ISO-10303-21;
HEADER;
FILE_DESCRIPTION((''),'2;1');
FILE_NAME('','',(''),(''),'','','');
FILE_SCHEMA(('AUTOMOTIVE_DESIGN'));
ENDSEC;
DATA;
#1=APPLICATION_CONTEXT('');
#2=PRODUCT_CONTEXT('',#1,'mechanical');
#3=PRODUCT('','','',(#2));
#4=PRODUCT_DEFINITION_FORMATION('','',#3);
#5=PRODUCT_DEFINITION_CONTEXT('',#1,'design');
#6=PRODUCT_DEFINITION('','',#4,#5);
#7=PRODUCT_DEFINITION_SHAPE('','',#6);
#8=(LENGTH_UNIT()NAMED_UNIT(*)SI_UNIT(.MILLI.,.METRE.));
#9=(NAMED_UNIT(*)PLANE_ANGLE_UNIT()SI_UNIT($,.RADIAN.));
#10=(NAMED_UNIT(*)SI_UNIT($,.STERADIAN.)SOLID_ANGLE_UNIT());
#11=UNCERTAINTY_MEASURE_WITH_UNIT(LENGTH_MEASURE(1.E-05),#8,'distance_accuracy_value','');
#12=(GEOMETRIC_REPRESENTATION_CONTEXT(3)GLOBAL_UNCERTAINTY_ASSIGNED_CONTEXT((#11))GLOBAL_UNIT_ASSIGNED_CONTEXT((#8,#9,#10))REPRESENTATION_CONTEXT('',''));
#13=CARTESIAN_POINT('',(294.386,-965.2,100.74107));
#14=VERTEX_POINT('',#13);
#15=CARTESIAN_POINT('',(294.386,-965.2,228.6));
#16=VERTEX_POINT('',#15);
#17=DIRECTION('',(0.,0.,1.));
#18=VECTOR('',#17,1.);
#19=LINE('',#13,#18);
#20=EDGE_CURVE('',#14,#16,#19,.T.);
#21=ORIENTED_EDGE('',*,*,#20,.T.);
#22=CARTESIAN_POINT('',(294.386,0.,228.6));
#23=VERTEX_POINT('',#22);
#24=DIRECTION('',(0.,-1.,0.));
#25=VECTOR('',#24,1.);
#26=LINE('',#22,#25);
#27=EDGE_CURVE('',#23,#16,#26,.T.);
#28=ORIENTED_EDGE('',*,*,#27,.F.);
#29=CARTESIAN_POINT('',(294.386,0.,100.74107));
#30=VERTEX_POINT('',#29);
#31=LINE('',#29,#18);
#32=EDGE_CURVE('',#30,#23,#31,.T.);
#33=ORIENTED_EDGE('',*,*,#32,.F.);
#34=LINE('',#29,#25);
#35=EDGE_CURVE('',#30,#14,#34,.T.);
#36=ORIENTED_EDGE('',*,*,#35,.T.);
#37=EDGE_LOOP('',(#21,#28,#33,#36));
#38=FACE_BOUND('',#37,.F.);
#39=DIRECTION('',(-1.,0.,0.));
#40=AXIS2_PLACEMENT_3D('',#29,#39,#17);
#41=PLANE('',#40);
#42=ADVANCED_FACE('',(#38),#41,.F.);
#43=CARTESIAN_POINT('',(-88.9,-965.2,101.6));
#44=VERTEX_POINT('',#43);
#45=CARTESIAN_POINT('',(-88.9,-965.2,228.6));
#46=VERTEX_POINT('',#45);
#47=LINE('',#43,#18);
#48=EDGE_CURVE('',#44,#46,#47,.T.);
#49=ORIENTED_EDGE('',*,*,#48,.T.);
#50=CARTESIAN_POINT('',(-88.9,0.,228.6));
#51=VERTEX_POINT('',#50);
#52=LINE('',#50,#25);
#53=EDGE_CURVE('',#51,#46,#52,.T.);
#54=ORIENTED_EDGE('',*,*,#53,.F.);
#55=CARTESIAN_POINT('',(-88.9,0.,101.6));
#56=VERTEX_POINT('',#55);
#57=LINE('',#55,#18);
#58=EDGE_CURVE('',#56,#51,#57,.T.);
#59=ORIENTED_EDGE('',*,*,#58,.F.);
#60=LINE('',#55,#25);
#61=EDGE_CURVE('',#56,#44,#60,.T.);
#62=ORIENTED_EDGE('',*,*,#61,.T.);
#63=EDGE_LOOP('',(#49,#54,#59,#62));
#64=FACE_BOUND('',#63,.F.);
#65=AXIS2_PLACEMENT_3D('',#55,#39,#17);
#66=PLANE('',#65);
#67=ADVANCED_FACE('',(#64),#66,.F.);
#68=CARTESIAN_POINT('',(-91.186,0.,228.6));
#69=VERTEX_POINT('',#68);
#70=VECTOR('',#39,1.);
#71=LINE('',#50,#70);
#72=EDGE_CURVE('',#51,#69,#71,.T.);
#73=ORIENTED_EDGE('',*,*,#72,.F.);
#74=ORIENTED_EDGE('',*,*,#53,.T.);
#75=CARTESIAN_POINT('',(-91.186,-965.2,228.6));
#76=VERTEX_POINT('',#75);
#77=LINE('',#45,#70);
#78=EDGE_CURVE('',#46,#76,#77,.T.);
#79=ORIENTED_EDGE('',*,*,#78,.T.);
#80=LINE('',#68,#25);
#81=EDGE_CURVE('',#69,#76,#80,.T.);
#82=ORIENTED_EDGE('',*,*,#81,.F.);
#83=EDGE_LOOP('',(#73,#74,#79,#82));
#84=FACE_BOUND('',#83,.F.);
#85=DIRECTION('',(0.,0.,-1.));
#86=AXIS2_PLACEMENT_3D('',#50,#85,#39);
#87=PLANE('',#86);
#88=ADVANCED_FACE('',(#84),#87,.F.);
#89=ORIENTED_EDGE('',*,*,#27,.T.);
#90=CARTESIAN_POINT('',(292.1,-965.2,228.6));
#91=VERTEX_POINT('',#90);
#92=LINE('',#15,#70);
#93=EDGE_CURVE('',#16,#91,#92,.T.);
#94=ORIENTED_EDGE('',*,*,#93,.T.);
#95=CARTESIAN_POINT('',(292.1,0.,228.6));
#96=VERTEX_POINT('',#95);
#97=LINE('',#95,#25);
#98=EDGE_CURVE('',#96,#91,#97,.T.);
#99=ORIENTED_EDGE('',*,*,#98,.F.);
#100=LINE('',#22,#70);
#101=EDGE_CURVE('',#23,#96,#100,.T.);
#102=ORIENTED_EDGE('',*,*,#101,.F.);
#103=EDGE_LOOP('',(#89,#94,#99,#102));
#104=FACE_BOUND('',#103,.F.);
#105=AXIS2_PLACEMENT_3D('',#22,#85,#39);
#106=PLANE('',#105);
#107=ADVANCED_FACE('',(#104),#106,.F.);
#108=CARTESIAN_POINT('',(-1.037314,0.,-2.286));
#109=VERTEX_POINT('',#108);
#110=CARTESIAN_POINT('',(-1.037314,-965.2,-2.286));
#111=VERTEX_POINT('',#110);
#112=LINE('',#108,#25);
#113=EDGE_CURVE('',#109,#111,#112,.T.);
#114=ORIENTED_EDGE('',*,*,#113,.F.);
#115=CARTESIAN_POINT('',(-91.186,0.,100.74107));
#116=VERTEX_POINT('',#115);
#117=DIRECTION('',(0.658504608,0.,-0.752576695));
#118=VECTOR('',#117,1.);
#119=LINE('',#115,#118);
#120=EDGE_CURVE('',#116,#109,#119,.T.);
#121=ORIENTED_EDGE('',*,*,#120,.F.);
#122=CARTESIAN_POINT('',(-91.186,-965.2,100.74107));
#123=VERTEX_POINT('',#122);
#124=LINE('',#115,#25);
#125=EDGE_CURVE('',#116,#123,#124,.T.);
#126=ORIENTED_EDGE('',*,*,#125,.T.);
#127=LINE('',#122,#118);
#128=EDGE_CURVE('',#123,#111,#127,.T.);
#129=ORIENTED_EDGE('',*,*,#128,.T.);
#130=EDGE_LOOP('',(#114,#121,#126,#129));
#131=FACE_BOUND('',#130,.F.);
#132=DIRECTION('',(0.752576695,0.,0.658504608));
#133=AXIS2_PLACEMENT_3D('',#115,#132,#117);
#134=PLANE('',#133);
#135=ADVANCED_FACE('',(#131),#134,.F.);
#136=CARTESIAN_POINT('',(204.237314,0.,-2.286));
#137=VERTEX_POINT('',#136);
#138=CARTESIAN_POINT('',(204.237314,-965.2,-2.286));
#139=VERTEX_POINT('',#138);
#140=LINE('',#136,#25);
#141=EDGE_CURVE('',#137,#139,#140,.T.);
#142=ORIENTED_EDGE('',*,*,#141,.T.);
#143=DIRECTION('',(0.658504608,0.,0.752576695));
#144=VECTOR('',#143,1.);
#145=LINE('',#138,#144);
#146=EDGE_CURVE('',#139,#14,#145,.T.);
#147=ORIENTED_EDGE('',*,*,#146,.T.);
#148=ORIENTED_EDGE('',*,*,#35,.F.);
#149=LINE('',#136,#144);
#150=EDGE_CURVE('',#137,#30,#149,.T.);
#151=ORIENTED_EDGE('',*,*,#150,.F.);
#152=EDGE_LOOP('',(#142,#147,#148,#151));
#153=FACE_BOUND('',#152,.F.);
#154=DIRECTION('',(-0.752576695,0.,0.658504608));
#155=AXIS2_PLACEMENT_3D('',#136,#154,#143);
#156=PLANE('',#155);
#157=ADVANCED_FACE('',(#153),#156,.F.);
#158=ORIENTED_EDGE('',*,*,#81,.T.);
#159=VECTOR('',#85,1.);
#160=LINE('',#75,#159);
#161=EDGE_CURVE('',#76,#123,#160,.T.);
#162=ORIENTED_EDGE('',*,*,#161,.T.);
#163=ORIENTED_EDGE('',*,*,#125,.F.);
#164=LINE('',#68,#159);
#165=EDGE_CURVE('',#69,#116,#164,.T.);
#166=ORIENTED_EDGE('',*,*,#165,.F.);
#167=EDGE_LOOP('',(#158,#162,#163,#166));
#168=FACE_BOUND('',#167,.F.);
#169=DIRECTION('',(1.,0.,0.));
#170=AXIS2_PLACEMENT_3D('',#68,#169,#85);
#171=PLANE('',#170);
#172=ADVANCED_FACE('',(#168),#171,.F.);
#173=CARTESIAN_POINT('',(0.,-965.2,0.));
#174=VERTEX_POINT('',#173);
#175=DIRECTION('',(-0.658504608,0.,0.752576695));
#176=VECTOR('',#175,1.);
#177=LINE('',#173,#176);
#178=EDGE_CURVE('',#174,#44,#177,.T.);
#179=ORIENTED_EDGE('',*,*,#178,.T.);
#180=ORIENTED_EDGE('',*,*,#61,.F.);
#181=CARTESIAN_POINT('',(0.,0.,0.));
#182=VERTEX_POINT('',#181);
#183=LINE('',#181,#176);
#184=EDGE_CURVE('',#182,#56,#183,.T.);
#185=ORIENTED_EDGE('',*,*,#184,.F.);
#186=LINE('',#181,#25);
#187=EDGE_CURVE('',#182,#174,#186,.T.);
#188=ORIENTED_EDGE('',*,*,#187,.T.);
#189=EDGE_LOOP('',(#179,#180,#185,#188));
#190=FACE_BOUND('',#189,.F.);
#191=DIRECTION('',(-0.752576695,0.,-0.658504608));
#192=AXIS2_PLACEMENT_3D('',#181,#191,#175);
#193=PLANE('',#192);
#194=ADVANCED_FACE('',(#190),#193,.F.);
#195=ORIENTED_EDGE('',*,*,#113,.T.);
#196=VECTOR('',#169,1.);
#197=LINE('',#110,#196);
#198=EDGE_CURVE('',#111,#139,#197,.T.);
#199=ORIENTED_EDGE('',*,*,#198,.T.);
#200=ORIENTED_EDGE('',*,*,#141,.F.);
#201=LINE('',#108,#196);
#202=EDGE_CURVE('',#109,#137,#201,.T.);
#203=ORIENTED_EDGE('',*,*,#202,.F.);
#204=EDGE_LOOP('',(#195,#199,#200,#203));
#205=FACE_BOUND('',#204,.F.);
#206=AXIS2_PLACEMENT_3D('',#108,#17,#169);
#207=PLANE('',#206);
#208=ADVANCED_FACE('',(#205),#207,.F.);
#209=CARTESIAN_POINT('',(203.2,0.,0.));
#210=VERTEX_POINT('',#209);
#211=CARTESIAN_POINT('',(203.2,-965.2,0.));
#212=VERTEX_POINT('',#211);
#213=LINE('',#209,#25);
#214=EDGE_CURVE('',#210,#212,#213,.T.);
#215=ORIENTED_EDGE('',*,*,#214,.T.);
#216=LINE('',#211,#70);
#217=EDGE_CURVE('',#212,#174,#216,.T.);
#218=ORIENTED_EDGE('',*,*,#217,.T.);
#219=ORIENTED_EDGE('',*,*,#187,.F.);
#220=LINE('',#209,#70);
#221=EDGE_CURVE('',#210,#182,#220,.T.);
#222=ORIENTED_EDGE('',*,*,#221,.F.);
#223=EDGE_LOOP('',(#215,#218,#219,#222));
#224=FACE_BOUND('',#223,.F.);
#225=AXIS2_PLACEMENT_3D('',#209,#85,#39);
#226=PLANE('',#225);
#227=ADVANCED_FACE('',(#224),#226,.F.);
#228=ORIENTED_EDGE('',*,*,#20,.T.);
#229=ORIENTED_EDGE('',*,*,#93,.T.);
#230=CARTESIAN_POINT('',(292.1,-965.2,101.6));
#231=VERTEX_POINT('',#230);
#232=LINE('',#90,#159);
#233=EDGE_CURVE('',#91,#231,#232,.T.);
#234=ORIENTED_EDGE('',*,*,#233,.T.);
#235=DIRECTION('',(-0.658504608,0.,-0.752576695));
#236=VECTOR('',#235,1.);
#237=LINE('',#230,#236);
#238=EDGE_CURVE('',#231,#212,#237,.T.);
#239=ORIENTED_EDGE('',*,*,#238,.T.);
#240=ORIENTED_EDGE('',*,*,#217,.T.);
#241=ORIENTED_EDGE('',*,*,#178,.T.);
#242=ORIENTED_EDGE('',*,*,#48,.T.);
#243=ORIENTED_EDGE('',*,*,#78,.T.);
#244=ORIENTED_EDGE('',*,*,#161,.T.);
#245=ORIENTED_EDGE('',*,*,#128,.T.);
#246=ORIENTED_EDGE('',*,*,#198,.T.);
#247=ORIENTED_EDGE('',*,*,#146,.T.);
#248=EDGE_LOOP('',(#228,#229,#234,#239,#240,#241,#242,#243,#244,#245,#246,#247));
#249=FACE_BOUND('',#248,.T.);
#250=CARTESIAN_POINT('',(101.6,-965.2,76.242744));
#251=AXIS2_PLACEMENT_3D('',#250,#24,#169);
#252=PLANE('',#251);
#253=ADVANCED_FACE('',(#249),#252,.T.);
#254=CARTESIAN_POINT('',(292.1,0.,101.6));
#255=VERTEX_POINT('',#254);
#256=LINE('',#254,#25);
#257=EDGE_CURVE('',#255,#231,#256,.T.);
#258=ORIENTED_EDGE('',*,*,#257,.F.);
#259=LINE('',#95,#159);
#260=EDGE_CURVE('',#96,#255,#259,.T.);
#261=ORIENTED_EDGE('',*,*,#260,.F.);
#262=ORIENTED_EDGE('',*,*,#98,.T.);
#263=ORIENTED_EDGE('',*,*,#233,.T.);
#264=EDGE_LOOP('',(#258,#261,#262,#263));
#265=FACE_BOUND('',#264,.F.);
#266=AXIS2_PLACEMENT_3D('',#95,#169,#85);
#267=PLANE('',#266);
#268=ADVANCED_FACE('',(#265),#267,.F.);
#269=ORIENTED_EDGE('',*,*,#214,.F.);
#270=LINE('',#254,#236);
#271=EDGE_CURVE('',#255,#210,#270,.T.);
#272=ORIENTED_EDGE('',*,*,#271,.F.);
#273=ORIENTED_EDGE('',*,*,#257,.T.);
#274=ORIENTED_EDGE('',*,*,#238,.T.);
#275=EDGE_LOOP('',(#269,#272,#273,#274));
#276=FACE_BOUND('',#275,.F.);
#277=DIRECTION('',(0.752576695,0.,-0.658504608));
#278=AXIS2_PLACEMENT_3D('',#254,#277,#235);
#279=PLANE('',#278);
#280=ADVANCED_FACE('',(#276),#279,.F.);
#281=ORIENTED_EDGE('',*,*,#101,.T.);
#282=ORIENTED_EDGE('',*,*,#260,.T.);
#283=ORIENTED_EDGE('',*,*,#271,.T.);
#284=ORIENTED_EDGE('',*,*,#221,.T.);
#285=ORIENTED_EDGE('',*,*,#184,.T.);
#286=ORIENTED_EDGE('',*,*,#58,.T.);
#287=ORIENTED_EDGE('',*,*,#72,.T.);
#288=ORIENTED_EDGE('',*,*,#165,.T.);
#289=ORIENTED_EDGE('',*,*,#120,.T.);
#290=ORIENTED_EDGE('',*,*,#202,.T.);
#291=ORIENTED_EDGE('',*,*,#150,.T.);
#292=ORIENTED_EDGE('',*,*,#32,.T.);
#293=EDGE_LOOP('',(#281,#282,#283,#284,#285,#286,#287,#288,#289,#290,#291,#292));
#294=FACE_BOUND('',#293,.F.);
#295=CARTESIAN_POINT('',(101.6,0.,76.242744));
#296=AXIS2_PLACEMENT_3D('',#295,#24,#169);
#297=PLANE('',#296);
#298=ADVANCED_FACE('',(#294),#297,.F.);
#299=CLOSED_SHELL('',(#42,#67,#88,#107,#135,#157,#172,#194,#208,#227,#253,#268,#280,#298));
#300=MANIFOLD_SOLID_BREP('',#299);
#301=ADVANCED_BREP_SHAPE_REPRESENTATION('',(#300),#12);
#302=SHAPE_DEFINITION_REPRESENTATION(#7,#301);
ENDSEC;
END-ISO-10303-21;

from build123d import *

# Parameters (mm, degrees)
F1_DEPTH = 965.2


# Not quite as in the source:
# - a feature names something its author has since deleted; it is built from what else it names


with BuildPart() as f1:
    # F0 (on Front) → F1 (new body)
    with BuildSketch(Plane.XZ):
        Polygon((-88.9, 101.6), (-88.9, 228.6), (-91.186, 228.6), (-91.186, 100.7410695246), (-1.037314166, -2.286), (204.237314166, -2.286), (294.386, 100.7410695246), (294.386, 228.6), (292.1, 228.6), (292.1, 101.6), (203.2, 0), (0, 0), align=None)
    extrude(amount=F1_DEPTH)


solid = f1.part
